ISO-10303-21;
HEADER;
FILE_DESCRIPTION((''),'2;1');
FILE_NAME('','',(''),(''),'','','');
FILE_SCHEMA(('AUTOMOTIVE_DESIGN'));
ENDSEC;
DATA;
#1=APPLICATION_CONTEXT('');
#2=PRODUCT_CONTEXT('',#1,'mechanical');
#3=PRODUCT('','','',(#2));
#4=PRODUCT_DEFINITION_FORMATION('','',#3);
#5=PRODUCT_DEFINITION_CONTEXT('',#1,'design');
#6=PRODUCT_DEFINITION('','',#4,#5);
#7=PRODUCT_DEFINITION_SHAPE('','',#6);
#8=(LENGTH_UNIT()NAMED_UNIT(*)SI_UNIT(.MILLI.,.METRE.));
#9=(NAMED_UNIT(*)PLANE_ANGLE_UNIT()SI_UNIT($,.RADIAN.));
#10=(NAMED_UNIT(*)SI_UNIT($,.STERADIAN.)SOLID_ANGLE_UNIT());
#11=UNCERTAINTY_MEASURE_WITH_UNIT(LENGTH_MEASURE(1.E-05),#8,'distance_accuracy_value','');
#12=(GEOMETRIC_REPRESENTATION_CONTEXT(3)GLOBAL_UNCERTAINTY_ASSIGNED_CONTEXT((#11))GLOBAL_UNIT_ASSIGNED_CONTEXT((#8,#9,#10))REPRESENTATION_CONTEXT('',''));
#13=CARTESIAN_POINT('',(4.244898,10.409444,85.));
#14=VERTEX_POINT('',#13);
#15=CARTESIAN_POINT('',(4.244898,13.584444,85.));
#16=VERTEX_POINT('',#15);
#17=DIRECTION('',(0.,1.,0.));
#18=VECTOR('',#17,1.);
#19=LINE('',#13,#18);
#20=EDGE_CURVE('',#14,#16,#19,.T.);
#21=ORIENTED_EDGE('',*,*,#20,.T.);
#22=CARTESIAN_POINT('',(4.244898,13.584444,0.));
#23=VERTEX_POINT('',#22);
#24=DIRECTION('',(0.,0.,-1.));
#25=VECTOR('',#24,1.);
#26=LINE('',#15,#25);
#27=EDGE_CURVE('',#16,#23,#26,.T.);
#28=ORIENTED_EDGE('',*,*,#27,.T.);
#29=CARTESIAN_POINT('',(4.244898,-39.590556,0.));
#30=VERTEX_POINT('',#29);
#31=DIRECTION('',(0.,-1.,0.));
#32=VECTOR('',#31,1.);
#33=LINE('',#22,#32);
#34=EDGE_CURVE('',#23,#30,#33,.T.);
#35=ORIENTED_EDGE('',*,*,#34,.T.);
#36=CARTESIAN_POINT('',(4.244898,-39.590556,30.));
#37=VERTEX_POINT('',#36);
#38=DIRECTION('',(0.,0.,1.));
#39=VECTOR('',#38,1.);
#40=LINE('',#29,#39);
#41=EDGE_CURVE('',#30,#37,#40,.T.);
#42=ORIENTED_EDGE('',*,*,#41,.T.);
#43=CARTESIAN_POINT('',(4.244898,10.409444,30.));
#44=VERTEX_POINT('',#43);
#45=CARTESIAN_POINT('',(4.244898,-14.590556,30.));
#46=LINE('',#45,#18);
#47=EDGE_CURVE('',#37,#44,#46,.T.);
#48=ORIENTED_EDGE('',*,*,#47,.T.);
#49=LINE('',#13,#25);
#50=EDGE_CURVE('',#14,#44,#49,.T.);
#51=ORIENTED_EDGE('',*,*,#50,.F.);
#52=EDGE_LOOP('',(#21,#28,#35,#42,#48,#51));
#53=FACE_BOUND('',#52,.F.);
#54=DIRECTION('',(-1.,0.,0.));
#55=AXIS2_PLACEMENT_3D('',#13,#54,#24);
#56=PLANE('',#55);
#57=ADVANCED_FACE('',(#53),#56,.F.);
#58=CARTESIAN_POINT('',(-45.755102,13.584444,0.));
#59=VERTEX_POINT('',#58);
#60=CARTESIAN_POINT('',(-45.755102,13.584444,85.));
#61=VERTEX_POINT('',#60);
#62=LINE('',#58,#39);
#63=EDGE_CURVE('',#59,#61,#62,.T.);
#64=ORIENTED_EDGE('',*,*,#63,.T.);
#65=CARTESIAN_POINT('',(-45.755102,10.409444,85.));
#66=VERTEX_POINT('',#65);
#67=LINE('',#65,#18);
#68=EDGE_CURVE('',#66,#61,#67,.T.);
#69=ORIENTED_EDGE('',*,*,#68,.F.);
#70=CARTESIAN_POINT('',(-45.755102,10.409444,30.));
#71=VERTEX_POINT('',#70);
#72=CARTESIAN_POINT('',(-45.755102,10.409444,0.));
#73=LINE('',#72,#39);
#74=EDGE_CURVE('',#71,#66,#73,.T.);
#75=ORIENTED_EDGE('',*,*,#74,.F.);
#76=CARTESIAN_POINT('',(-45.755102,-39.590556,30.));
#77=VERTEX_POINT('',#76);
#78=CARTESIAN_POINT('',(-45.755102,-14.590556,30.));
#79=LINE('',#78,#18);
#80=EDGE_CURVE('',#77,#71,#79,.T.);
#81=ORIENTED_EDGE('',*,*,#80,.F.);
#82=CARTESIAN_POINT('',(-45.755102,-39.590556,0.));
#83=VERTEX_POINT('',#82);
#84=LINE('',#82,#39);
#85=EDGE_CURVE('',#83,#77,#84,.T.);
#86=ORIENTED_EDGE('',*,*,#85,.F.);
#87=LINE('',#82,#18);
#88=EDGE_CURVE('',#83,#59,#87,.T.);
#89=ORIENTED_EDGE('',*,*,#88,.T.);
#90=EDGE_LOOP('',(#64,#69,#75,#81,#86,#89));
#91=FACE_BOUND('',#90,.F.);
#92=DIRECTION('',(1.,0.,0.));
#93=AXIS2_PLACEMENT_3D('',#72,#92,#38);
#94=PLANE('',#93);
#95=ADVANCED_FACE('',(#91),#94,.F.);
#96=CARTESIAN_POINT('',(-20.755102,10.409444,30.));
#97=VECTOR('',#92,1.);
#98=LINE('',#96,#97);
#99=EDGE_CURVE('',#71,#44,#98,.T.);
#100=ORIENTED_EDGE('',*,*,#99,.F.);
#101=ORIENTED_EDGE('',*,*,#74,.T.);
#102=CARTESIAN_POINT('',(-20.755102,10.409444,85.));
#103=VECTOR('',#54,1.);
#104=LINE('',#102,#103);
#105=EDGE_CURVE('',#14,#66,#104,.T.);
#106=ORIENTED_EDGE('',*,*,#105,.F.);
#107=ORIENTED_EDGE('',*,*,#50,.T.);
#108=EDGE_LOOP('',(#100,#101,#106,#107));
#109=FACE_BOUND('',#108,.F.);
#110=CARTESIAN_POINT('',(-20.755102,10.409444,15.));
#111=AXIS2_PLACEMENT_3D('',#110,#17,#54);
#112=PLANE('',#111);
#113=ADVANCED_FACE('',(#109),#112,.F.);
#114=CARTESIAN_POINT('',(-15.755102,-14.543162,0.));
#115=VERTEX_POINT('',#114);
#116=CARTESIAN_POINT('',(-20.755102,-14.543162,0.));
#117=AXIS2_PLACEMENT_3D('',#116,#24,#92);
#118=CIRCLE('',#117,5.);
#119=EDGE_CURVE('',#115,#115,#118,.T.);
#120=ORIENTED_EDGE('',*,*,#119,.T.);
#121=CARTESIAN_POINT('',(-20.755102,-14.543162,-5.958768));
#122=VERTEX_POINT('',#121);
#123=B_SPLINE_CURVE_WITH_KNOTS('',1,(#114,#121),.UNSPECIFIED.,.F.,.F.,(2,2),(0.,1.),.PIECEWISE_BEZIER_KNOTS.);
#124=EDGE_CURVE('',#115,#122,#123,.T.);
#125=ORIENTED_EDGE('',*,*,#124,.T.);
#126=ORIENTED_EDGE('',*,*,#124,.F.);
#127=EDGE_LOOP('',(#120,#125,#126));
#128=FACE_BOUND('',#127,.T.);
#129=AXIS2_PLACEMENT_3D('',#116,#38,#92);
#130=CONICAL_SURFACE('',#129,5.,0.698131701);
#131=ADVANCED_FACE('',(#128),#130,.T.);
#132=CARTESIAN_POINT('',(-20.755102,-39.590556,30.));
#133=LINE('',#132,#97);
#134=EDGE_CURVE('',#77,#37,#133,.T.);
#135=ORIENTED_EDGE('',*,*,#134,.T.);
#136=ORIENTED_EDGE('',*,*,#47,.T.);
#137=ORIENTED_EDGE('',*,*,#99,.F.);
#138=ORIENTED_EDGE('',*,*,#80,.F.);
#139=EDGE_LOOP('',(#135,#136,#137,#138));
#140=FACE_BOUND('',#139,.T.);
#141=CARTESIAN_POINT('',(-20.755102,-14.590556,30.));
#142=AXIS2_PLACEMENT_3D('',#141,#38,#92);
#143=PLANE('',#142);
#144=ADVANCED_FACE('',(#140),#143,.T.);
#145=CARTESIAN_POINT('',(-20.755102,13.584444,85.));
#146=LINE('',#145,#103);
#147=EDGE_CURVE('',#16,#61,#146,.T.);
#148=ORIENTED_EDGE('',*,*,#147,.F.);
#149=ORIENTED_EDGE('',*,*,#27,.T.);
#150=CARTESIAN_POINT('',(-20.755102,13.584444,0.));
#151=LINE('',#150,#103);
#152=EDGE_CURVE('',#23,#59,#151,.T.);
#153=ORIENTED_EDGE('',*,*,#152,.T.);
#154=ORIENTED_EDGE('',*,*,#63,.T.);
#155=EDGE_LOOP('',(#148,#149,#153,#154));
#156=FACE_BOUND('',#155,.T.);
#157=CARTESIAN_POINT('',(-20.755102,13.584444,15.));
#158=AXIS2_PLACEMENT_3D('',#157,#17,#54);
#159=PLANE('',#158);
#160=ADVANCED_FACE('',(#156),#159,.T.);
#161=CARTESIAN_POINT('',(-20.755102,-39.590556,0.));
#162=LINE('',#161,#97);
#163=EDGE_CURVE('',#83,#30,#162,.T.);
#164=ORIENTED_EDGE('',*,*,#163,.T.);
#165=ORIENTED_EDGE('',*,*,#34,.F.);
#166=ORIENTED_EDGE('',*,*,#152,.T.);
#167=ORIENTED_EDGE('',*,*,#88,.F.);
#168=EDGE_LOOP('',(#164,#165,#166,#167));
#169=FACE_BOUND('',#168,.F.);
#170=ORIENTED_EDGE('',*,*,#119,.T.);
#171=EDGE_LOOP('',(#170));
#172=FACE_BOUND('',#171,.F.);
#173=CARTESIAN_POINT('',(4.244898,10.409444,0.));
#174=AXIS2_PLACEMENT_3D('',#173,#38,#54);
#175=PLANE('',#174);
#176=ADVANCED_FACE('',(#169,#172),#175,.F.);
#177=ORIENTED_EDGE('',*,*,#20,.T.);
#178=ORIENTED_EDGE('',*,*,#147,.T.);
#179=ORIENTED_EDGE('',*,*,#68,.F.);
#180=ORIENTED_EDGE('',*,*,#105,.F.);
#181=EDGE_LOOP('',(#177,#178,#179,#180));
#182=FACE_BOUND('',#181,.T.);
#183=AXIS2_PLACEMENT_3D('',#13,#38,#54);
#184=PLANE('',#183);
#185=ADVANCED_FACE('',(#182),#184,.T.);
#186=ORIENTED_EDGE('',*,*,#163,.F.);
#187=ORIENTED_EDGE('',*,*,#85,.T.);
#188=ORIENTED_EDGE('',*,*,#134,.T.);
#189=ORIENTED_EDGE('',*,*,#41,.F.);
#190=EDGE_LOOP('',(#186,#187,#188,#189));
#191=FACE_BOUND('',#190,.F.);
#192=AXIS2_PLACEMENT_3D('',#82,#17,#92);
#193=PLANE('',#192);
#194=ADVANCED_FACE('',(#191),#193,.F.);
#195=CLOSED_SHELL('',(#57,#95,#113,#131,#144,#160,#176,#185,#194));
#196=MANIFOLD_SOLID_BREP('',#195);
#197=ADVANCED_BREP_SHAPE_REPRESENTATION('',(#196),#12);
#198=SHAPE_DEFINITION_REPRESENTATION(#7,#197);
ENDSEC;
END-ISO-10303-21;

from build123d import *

# Parameters (mm, degrees)
F0_W     = 50
F0_H     = 50
F1_DEPTH = 30
F2_W     = 50
F2_H     = 30
F2_H_2   = 55
F3_DEPTH = 3.175
F4_R     = 5


# Not quite as in the source:
# - an extrude whose draft closes it to a point is written as a loft to that point


with BuildPart() as f1:
    # F0 (on Top) → F1 (new body)
    with BuildSketch(Plane.XY):
        with Locations((-20.7551017412, -14.590555802)):
            Rectangle(F0_W, F0_H)
    extrude(amount=F1_DEPTH)

    # F2 (on face) → F3 (join)
    with BuildSketch(Plane(origin=(0, 10.409444198, 0), x_dir=(-1, 0, 0), z_dir=(0, 1, 0))):
        with Locations((20.7551017412, 15)):
            Rectangle(F2_W, F2_H)
        with Locations((20.7551017412, 57.5)):
            Rectangle(F2_W, F2_H_2)
    extrude(amount=F3_DEPTH)

    # F4 (on face) → F5 section 0
    with BuildSketch(Plane(origin=(0, 0, 0), x_dir=(1, 0, 0), z_dir=(0, 0, -1)), mode=Mode.PRIVATE) as f5_s0:
        with Locations((-20.7551017412, 14.5431621725)):
            Circle(F4_R)
    loft([f5_s0.sketch, Vertex(-20.7551017412, -14.5431621725, -5.958767963)], ruled=True)


solid = f1.part
